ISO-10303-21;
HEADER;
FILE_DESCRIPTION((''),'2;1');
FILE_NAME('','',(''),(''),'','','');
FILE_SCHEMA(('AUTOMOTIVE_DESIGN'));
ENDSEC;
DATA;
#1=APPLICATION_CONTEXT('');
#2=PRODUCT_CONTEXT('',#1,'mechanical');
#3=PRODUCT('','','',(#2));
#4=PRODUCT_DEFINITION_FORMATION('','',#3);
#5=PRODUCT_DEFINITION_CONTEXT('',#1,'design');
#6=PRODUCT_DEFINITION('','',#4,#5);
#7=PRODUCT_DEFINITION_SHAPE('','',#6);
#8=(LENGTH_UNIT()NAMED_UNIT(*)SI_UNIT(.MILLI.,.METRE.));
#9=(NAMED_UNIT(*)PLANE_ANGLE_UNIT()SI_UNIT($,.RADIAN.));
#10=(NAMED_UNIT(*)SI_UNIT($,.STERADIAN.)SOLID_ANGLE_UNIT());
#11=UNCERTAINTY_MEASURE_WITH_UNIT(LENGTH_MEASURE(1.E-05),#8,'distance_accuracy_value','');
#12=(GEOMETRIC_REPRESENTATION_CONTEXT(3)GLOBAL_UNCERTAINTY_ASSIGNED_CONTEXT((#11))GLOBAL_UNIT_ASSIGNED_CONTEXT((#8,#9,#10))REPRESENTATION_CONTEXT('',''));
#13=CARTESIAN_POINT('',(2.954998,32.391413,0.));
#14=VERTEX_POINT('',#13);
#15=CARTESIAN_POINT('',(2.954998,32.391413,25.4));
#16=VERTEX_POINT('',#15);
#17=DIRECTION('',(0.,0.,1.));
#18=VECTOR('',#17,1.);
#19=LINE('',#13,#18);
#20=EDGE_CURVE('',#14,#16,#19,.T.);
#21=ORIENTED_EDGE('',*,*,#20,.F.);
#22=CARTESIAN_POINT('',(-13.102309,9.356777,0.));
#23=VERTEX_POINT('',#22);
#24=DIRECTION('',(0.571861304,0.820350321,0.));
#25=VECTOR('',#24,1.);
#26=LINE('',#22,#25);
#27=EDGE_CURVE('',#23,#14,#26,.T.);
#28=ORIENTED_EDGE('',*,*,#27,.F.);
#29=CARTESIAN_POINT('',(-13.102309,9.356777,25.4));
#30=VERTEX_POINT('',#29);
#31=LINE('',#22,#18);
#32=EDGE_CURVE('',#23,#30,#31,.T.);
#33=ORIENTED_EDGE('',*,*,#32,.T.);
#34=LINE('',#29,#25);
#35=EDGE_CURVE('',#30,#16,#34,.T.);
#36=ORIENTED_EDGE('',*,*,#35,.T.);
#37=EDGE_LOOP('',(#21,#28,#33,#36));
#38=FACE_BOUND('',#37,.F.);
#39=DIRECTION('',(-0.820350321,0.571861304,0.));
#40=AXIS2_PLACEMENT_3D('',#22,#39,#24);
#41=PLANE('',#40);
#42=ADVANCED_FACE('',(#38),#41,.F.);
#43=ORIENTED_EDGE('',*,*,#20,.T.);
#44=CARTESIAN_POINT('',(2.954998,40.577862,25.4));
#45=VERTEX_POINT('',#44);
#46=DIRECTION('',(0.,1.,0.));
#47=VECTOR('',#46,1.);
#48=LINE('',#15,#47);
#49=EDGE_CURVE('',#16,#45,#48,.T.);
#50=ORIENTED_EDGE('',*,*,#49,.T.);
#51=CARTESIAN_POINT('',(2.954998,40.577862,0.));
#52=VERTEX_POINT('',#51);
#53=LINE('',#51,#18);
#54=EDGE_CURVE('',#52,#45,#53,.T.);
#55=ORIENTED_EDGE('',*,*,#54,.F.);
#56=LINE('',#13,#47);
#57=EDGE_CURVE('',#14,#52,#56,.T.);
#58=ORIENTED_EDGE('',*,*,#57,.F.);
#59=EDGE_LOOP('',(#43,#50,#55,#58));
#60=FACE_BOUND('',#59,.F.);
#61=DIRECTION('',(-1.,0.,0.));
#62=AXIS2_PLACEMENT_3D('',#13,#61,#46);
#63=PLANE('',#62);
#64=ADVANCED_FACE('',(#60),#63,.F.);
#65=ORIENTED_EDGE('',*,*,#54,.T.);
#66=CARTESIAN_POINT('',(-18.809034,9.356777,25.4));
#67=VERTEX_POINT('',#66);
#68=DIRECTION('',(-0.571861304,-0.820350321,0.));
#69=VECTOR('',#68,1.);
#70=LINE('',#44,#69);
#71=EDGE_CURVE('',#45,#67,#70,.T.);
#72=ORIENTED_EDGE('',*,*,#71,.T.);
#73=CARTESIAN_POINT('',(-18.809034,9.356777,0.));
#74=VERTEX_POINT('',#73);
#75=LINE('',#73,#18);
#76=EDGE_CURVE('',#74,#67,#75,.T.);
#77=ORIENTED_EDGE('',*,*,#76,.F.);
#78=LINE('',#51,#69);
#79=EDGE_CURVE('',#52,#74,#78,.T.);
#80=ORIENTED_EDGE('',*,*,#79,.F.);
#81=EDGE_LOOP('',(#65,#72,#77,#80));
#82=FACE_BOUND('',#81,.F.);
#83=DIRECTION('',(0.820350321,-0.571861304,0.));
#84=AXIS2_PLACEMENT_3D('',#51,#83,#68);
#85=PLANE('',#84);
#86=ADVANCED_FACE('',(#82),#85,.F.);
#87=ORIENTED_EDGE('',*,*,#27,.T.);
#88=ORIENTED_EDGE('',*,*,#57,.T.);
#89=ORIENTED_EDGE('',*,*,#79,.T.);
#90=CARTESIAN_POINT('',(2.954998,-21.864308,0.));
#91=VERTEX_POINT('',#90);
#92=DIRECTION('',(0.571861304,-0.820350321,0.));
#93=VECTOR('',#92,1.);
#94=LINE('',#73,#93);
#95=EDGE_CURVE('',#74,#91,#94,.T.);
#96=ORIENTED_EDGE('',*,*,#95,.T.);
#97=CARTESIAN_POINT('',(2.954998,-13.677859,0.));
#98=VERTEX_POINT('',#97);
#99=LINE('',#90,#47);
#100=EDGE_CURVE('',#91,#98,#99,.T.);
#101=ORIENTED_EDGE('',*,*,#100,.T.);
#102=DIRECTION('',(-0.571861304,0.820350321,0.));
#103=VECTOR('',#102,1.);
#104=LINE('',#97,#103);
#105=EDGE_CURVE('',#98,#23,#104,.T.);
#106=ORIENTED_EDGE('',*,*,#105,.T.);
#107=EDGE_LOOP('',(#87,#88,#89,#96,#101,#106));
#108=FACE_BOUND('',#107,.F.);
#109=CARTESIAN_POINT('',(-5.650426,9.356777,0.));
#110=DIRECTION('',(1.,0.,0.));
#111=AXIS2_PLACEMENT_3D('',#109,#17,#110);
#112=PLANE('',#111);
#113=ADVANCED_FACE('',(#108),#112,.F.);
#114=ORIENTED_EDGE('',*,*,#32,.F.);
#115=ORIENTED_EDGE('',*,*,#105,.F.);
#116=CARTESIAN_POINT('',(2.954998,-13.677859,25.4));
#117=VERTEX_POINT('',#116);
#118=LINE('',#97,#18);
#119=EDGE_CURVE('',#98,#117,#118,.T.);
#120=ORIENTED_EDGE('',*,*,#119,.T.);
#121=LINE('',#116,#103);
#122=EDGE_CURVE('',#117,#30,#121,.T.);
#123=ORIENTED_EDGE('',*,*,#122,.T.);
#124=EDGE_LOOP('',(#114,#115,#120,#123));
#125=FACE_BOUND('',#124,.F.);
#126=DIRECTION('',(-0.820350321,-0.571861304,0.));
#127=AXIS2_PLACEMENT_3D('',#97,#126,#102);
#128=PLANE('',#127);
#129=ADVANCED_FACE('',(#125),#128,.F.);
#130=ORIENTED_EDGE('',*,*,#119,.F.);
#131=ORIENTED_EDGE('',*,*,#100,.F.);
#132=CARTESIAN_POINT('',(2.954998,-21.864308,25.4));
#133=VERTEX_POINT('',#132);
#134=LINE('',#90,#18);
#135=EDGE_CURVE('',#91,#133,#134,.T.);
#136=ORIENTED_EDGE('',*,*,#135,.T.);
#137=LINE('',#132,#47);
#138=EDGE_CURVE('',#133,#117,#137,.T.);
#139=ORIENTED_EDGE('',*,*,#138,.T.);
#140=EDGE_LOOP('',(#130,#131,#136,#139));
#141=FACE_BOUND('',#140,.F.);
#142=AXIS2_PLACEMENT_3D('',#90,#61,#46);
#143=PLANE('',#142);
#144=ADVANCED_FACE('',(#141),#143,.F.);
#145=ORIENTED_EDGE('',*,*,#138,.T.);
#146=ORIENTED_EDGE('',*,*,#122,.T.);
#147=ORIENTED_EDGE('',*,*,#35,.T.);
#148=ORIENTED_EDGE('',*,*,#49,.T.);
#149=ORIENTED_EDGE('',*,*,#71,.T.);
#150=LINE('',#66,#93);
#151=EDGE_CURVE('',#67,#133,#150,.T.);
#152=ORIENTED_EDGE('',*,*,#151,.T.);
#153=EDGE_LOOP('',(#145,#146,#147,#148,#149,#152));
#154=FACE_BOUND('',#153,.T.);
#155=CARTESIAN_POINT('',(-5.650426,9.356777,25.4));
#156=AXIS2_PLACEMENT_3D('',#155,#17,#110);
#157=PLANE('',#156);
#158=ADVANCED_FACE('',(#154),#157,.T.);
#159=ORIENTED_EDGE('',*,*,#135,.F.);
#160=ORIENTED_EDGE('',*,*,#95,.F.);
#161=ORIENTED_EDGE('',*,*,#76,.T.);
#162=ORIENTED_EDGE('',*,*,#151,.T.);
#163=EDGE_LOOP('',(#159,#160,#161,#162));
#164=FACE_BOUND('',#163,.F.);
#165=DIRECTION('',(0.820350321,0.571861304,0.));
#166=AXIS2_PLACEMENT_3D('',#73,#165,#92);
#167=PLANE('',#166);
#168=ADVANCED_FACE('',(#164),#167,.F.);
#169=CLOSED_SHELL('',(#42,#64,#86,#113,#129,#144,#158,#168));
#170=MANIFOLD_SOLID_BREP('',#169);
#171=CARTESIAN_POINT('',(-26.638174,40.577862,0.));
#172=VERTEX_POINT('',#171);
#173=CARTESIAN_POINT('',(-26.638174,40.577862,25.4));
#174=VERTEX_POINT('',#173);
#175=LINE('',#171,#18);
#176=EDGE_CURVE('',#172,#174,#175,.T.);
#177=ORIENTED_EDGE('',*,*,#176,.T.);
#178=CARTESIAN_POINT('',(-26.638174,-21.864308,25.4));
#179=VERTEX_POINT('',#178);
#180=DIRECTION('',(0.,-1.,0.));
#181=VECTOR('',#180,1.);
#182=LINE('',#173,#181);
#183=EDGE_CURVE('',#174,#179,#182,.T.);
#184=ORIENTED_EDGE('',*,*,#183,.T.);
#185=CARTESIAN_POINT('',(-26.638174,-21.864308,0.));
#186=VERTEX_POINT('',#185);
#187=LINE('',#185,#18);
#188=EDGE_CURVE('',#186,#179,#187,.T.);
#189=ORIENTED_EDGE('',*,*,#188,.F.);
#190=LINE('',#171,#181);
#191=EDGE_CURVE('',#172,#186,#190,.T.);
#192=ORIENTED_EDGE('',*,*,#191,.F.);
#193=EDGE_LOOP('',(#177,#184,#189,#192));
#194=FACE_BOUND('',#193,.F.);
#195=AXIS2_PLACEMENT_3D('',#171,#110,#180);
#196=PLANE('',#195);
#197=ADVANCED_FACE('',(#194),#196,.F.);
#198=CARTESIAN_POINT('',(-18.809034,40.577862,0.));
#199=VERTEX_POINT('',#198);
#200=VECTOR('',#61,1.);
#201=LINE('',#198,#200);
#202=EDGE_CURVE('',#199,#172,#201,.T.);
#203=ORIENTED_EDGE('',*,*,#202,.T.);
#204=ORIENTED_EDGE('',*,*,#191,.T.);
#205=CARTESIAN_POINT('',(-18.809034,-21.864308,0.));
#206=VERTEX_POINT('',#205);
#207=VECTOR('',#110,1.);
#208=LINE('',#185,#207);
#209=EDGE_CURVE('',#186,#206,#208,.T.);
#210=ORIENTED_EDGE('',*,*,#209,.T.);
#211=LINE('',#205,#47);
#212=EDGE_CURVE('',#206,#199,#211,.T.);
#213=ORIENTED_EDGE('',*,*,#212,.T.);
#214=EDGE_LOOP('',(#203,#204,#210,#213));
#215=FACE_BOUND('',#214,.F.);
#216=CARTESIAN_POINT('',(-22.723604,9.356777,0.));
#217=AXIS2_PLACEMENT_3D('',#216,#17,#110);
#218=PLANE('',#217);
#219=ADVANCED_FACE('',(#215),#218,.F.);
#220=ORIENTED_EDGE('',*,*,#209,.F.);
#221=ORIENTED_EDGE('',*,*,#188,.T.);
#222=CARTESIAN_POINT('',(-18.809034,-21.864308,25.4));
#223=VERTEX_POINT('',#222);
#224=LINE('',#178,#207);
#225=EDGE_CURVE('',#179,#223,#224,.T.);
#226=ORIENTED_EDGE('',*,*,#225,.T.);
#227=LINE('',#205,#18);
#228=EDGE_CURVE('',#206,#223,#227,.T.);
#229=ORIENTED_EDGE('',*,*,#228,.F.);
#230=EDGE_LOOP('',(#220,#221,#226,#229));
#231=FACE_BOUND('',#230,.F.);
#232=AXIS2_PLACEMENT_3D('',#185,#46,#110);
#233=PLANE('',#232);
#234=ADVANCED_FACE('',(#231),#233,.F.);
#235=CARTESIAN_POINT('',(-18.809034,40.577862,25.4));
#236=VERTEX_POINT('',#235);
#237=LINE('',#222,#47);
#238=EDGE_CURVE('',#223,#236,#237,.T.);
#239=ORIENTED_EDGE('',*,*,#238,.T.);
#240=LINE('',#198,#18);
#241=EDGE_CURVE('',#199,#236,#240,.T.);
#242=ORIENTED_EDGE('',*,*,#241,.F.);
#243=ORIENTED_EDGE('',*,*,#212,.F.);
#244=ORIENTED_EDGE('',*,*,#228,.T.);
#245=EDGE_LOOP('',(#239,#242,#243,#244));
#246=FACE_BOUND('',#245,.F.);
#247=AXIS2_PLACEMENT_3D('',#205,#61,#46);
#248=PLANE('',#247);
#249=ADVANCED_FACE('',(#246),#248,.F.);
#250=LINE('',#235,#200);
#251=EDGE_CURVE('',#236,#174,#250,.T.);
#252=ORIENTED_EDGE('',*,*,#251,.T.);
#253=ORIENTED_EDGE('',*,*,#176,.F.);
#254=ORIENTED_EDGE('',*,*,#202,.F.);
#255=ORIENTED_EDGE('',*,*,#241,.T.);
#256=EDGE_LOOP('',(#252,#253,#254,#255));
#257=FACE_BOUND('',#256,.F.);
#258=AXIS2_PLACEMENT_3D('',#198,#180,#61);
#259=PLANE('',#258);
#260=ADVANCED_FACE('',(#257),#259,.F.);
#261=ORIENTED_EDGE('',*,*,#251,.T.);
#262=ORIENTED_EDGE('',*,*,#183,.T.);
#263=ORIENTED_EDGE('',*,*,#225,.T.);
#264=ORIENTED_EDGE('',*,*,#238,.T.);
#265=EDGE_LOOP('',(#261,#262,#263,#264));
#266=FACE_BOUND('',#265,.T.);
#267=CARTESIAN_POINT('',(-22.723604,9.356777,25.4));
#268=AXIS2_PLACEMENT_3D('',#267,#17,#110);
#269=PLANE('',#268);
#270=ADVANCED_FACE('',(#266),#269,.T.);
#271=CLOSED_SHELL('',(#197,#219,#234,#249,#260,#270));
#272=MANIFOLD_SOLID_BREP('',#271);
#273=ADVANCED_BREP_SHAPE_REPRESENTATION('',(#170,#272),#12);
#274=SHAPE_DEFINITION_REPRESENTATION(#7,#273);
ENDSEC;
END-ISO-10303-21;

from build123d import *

# Parameters (mm, degrees)
F1_DEPTH = 25.4


# Not quite as in the source:
# - a feature of the source that left no trace in its solid (it failed there, or was rolled back) is left out


with BuildPart() as f1:
    # F0 (on Top) → F1 (new body)
    with BuildSketch(Plane.XY):
        Polygon((2.9549982864, 40.5778624117), (-18.8090335578, 9.3567771837), (2.9549982864, -21.8643080443), (2.9549982864, -13.6778589597), (-13.102308847, 9.3567771837), (2.9549982864, 32.3914133272), align=None)
    extrude(amount=F1_DEPTH)


with BuildPart() as f1b:
    # F0 (on Top) → F1, piece 2 (new body)
    with BuildSketch(Plane.XY):
        Polygon((-18.8090335578, 40.5778624117), (-26.6381744295, 40.5778624117), (-26.6381744295, -21.8643080443), (-18.8090335578, -21.8643080443), (-18.8090335578, 9.3567771837), align=None)
    extrude(amount=F1_DEPTH)


solid = Compound([f1.part, f1b.part])
